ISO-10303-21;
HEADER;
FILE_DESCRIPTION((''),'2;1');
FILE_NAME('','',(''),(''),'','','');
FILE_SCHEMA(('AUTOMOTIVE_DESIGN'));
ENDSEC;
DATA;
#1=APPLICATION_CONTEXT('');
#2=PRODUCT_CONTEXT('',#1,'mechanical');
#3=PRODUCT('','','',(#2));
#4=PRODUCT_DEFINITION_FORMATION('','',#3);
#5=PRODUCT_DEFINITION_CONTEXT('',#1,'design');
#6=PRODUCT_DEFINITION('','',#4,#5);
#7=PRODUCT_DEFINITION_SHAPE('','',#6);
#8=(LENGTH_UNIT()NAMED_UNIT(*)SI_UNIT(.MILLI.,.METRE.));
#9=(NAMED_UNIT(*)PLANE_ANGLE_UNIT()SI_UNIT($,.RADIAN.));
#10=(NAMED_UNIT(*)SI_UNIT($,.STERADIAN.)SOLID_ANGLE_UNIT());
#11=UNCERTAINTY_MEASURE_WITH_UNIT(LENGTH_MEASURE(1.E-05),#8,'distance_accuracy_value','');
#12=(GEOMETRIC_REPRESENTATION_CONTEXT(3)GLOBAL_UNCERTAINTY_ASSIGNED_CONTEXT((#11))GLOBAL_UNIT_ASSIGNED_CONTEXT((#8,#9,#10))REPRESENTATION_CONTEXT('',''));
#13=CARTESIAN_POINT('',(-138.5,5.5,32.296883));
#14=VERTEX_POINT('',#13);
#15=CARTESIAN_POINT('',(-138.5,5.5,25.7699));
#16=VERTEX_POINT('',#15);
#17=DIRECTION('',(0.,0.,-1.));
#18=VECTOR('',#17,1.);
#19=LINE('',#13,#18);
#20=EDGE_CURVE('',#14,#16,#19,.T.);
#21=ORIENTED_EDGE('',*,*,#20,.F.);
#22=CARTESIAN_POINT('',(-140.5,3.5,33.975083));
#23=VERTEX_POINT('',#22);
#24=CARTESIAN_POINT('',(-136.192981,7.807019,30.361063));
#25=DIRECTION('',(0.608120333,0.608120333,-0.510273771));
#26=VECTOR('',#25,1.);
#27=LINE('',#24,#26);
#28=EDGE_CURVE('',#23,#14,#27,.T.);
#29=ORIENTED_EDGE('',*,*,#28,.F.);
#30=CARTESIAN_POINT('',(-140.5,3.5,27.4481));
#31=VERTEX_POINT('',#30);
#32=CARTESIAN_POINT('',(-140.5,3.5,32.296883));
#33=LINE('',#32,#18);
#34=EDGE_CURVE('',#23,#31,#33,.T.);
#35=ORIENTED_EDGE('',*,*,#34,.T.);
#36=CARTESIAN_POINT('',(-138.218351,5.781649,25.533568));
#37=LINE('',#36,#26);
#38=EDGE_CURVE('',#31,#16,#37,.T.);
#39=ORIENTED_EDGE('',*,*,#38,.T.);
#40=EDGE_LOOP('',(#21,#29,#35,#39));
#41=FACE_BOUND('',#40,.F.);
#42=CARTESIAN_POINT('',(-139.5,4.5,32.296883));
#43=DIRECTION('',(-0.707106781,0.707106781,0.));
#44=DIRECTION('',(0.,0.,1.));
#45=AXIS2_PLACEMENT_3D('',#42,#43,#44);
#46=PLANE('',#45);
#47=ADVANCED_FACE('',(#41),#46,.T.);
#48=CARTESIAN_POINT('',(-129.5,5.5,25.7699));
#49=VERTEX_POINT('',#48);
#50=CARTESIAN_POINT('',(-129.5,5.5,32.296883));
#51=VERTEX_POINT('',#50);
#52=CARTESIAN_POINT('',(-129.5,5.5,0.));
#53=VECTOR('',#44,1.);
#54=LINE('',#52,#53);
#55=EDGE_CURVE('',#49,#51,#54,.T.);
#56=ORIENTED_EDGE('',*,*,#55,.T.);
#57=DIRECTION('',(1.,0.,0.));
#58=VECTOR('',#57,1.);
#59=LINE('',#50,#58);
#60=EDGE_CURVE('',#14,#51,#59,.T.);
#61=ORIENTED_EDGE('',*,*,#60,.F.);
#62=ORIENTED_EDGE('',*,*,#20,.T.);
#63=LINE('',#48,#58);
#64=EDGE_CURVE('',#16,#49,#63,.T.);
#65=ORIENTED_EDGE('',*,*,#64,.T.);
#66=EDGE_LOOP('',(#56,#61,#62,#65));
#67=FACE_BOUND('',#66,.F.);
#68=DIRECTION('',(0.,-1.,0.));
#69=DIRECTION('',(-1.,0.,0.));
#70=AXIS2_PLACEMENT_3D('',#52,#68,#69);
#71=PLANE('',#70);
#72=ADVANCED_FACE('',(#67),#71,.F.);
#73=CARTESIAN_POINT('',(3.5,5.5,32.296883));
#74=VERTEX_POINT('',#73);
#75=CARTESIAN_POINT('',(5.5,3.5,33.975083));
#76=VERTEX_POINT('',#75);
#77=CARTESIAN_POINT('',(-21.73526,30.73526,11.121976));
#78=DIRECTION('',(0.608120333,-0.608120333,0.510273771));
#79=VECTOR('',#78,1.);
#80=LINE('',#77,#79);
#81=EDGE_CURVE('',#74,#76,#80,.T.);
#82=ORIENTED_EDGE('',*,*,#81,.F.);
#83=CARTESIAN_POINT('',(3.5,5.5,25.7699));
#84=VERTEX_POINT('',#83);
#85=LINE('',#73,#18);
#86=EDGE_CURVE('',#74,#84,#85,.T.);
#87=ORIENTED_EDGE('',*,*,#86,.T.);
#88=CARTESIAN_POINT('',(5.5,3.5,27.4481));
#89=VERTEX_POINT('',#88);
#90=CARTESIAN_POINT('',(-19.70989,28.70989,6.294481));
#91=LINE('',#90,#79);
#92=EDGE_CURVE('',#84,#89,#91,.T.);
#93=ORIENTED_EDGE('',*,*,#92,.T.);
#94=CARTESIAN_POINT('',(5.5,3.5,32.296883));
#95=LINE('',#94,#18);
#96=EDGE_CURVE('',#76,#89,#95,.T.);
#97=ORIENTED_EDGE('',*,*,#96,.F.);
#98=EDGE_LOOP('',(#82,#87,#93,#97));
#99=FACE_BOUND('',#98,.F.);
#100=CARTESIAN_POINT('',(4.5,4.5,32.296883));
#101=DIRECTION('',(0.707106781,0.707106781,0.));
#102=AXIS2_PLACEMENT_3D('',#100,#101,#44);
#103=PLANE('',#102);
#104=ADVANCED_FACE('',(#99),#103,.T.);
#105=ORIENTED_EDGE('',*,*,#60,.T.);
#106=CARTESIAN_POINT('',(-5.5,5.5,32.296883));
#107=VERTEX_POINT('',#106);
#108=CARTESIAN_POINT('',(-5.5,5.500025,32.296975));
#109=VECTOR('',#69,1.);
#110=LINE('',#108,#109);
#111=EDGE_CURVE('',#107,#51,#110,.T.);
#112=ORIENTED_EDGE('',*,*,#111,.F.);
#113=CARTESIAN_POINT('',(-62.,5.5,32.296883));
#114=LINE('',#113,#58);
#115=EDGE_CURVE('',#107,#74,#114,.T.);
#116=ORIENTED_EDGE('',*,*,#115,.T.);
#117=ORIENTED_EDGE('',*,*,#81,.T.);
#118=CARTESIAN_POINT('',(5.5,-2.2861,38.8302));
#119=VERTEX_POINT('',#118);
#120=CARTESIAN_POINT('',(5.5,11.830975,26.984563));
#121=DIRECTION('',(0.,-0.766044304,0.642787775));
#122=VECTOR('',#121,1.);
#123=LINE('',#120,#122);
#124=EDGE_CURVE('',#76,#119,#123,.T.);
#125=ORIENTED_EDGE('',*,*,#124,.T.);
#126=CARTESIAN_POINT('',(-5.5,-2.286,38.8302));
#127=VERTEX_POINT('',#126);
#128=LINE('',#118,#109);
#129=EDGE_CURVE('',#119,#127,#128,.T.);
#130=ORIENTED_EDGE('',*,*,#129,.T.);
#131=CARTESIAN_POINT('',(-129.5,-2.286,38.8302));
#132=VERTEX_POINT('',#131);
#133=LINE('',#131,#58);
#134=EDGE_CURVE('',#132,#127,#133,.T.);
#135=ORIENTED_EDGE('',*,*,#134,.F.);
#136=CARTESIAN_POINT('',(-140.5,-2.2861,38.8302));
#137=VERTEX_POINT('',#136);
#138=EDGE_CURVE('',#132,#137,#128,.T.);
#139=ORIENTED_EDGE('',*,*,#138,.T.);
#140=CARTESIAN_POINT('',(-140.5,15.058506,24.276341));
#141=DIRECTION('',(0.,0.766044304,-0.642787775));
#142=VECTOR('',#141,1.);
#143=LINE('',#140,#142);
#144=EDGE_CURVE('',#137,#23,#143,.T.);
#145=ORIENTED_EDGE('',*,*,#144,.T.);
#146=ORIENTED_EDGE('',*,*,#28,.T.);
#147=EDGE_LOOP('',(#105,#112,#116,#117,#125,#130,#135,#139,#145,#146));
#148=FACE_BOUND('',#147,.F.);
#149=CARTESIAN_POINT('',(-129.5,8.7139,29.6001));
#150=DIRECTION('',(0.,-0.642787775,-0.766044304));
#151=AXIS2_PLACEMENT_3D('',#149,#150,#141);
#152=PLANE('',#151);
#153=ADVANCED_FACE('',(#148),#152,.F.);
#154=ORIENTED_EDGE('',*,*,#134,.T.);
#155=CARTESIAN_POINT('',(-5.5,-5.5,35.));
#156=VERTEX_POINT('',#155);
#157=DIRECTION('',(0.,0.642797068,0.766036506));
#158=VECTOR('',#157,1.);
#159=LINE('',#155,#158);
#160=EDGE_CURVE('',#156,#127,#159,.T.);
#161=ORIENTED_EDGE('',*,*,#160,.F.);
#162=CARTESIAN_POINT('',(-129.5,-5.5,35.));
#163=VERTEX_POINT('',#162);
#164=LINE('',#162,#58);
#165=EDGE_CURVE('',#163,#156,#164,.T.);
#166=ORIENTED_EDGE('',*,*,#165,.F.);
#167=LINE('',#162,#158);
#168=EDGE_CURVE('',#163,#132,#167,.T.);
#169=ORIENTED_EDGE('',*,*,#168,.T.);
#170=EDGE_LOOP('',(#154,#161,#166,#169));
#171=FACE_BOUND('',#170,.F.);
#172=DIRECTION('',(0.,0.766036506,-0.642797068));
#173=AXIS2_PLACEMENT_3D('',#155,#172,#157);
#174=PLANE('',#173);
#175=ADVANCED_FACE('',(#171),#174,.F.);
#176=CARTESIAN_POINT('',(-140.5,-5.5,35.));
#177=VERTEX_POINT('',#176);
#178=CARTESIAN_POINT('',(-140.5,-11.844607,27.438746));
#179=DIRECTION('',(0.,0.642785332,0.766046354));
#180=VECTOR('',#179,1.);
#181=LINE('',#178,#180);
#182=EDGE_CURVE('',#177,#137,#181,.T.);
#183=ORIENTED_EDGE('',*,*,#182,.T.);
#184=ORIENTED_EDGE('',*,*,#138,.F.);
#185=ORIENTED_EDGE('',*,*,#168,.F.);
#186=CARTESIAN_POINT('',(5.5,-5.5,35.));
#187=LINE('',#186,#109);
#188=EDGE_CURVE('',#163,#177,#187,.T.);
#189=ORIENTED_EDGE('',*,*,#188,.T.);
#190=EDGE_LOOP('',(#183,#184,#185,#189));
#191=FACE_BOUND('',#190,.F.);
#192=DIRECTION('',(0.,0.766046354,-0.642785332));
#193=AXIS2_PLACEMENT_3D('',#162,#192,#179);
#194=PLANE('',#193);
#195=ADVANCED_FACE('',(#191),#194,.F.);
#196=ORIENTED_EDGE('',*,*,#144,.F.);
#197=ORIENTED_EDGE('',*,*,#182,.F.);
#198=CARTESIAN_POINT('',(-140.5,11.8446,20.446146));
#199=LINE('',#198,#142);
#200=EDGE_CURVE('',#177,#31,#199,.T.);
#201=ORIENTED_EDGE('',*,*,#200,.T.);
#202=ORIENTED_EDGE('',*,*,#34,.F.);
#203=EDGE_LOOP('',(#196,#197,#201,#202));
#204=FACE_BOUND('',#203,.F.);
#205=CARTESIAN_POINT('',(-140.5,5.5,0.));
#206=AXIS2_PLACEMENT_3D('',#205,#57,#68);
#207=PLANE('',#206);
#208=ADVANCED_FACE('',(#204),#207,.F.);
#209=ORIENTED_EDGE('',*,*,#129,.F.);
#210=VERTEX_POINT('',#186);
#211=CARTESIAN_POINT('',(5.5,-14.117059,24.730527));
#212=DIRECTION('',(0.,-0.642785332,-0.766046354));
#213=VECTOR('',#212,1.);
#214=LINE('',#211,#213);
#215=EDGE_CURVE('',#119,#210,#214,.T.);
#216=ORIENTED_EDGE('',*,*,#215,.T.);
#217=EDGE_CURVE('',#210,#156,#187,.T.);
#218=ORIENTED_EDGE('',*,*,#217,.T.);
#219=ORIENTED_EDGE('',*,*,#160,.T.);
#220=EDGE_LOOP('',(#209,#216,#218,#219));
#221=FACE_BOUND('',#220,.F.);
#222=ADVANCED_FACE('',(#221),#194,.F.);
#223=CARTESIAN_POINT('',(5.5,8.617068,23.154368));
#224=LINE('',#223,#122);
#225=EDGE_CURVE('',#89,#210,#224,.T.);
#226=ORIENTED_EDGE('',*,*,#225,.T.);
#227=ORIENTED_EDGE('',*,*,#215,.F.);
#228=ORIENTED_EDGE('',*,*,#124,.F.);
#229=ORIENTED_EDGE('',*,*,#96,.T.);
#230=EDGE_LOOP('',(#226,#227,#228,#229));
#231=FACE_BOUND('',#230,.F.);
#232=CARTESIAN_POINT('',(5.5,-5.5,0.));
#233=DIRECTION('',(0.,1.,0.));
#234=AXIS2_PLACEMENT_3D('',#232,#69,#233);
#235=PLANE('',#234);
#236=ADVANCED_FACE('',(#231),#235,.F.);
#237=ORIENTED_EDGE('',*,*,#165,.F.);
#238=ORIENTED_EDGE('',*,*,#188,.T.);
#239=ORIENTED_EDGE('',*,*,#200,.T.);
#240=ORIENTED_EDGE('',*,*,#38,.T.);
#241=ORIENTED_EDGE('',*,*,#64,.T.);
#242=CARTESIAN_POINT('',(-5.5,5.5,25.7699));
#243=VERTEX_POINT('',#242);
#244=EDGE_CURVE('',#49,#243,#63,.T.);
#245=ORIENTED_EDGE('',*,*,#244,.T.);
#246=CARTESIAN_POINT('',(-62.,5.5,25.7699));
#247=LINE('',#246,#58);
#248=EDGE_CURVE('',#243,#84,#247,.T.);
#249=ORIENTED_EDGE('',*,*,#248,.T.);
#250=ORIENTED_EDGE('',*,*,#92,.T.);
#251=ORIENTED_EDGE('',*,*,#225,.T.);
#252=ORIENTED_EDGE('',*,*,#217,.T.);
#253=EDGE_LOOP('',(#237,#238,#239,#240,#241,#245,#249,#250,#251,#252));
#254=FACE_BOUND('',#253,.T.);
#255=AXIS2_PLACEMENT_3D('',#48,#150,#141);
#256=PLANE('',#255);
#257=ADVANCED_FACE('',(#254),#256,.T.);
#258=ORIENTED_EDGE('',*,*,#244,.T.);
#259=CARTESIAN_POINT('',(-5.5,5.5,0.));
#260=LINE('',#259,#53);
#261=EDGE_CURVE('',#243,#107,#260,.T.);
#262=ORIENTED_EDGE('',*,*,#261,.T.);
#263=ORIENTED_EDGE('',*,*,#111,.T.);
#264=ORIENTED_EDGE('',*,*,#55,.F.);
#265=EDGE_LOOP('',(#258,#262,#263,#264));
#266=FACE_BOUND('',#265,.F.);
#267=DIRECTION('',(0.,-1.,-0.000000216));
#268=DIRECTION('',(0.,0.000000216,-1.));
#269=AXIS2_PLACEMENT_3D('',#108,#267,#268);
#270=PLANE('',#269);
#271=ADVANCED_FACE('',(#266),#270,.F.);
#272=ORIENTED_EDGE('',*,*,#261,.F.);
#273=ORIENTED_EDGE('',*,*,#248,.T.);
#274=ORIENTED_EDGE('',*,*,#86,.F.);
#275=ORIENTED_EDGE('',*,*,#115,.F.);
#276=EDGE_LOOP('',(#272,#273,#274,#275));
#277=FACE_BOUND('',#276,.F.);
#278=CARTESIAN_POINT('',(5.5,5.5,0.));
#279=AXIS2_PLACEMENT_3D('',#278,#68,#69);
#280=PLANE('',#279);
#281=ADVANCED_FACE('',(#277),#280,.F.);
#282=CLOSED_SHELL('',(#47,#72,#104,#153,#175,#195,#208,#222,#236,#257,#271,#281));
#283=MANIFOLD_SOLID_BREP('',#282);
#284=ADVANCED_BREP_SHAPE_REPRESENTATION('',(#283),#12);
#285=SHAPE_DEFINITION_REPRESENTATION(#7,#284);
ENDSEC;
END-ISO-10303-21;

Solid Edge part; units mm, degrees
sketch "Sketch1" plane through (0, 0, 0) normal (0, 0, 1) x (1, 0, 0)
  line L0 (-140.5, -5.5) -> (-129.5, -5.5)
  line L1 (-129.5, -5.5) -> (-129.5, 5.5)
  line L2 (-129.5, 5.5) -> (-140.5, 5.5)
  line L3 (-140.5, 5.5) -> (-140.5, -5.5)
  line L4 (-5.5, -5.5) -> (5.5, -5.5)
  line L5 (5.5, -5.5) -> (5.5, 5.5)
  line L6 (5.5, 5.5) -> (-5.5, 5.5)
  line L7 (-5.5, 5.5) -> (-5.5, -5.5)
extrude "ExtrudedProtrusion_1" add sketch "Sketch1" along normal blind 35
sketch "Sketch2" plane through (-129.5, 0, 17.5) normal (1, 0, 0) x (0, 1, 0)
  line L0 (-5.5, 17.5) -> (5.5, 8.2699)
  line L1 (5.5, 8.2699) -> (8.7139, 12.1001)
  line L2 (-2.2861, 21.3302) -> (8.7139, 12.1001)
  line L3 (-5.5, 17.5) -> (-2.2861, 21.3302)
extrude "Protrusion1" add sketch "Sketch2" along normal up to vertex (124 mm away)
sketch "Sketch3" plane through (-135, 0, 35) normal (0, 0, 1) x (1, 0, 0)
  line L0 (5.5, -5.5) -> (-5.5, -5.5)
  line L1 (-5.5, -5.5) -> (-5.5, 5.5)
  line L2 (-5.5, 5.5) -> (5.5, 5.5)
  line L3 (5.5, 5.5) -> (5.5, -5.5)
  line L4 (140.5, -5.5) -> (129.5, -5.5)
  line L5 (129.5, -5.5) -> (129.5, 5.5)
  line L6 (129.5, 5.5) -> (140.5, 5.5)
  line L7 (140.5, 5.5) -> (140.5, -5.5)
extrude "Protrusion2" add sketch "Sketch3" along normal up to vertex (3.8302 mm away)
sketch "Sketch4" plane through (-129.5, 0, 17.5) normal (1, 0, 0) x (0, 1, 0)
  line L0 (8.7139, 12.1001) -> (-2.2861, 21.3302)
  line L1 (-5.5, 17.5) -> (-2.2861, 21.3302)
  line L2 (5.5, 8.2699) -> (-5.5, 17.5)
extrude "ExtrudedCutout_1" cut sketch "Sketch4" against normal blind 22.2856 and the other way blind 177.6733 material side at (-129.5, 3.246, 34.2535)
sketch "Sketch5" plane through (-129.5, -3.893, 36.9151) normal (1, 0, 0) x (0, 1, 0)
  line L0 (-1.607, 1.9151) -> (-1.607, -1.9151)
  line L1 (-1.607, -1.9151) -> (1.607, 1.9151)
  line L2 (1.607, 1.9151) -> (-1.607, 1.9151)
extrude "Protrusion3" add sketch "Sketch5" along normal up to vertex (124 mm away)
sketch "Sketch6" plane through (-5.5, 7.107, 29.0334) normal (1, 0, 0) x (0, 0.7660444, -0.6427876)
  line L0 (-3.3288, 1.4671) -> (0.8667, -3.5329)
  line L1 (0.8667, -3.5329) -> (0.8667, 1.4671)
  line L2 (0.8667, 1.4671) -> (-3.3288, 1.4671)
extrude "ExtrudedCutout_2" cut sketch "Sketch6" against normal blind 148.825
chamfer "Chamfer_1" distance 2 angle 45 2 edges at (5.5, 5.5, 29.0334) (-140.5, 5.5, 29.0334)
sketch "Sketch7" plane through (-5.5, -3.893, 36.9151) normal (1, 0, 0) x (0, 1, 0)
  line L0 (-1.607, 1.9151) -> (-1.607, -1.9151)
  line L1 (-1.607, -1.9151) -> (1.607, 1.9151)
  line L2 (1.607, 1.9151) -> (-1.607, 1.9151)
extrude "ExtrudedCutout_3" cut sketch "Sketch7" against normal blind 147.0502
